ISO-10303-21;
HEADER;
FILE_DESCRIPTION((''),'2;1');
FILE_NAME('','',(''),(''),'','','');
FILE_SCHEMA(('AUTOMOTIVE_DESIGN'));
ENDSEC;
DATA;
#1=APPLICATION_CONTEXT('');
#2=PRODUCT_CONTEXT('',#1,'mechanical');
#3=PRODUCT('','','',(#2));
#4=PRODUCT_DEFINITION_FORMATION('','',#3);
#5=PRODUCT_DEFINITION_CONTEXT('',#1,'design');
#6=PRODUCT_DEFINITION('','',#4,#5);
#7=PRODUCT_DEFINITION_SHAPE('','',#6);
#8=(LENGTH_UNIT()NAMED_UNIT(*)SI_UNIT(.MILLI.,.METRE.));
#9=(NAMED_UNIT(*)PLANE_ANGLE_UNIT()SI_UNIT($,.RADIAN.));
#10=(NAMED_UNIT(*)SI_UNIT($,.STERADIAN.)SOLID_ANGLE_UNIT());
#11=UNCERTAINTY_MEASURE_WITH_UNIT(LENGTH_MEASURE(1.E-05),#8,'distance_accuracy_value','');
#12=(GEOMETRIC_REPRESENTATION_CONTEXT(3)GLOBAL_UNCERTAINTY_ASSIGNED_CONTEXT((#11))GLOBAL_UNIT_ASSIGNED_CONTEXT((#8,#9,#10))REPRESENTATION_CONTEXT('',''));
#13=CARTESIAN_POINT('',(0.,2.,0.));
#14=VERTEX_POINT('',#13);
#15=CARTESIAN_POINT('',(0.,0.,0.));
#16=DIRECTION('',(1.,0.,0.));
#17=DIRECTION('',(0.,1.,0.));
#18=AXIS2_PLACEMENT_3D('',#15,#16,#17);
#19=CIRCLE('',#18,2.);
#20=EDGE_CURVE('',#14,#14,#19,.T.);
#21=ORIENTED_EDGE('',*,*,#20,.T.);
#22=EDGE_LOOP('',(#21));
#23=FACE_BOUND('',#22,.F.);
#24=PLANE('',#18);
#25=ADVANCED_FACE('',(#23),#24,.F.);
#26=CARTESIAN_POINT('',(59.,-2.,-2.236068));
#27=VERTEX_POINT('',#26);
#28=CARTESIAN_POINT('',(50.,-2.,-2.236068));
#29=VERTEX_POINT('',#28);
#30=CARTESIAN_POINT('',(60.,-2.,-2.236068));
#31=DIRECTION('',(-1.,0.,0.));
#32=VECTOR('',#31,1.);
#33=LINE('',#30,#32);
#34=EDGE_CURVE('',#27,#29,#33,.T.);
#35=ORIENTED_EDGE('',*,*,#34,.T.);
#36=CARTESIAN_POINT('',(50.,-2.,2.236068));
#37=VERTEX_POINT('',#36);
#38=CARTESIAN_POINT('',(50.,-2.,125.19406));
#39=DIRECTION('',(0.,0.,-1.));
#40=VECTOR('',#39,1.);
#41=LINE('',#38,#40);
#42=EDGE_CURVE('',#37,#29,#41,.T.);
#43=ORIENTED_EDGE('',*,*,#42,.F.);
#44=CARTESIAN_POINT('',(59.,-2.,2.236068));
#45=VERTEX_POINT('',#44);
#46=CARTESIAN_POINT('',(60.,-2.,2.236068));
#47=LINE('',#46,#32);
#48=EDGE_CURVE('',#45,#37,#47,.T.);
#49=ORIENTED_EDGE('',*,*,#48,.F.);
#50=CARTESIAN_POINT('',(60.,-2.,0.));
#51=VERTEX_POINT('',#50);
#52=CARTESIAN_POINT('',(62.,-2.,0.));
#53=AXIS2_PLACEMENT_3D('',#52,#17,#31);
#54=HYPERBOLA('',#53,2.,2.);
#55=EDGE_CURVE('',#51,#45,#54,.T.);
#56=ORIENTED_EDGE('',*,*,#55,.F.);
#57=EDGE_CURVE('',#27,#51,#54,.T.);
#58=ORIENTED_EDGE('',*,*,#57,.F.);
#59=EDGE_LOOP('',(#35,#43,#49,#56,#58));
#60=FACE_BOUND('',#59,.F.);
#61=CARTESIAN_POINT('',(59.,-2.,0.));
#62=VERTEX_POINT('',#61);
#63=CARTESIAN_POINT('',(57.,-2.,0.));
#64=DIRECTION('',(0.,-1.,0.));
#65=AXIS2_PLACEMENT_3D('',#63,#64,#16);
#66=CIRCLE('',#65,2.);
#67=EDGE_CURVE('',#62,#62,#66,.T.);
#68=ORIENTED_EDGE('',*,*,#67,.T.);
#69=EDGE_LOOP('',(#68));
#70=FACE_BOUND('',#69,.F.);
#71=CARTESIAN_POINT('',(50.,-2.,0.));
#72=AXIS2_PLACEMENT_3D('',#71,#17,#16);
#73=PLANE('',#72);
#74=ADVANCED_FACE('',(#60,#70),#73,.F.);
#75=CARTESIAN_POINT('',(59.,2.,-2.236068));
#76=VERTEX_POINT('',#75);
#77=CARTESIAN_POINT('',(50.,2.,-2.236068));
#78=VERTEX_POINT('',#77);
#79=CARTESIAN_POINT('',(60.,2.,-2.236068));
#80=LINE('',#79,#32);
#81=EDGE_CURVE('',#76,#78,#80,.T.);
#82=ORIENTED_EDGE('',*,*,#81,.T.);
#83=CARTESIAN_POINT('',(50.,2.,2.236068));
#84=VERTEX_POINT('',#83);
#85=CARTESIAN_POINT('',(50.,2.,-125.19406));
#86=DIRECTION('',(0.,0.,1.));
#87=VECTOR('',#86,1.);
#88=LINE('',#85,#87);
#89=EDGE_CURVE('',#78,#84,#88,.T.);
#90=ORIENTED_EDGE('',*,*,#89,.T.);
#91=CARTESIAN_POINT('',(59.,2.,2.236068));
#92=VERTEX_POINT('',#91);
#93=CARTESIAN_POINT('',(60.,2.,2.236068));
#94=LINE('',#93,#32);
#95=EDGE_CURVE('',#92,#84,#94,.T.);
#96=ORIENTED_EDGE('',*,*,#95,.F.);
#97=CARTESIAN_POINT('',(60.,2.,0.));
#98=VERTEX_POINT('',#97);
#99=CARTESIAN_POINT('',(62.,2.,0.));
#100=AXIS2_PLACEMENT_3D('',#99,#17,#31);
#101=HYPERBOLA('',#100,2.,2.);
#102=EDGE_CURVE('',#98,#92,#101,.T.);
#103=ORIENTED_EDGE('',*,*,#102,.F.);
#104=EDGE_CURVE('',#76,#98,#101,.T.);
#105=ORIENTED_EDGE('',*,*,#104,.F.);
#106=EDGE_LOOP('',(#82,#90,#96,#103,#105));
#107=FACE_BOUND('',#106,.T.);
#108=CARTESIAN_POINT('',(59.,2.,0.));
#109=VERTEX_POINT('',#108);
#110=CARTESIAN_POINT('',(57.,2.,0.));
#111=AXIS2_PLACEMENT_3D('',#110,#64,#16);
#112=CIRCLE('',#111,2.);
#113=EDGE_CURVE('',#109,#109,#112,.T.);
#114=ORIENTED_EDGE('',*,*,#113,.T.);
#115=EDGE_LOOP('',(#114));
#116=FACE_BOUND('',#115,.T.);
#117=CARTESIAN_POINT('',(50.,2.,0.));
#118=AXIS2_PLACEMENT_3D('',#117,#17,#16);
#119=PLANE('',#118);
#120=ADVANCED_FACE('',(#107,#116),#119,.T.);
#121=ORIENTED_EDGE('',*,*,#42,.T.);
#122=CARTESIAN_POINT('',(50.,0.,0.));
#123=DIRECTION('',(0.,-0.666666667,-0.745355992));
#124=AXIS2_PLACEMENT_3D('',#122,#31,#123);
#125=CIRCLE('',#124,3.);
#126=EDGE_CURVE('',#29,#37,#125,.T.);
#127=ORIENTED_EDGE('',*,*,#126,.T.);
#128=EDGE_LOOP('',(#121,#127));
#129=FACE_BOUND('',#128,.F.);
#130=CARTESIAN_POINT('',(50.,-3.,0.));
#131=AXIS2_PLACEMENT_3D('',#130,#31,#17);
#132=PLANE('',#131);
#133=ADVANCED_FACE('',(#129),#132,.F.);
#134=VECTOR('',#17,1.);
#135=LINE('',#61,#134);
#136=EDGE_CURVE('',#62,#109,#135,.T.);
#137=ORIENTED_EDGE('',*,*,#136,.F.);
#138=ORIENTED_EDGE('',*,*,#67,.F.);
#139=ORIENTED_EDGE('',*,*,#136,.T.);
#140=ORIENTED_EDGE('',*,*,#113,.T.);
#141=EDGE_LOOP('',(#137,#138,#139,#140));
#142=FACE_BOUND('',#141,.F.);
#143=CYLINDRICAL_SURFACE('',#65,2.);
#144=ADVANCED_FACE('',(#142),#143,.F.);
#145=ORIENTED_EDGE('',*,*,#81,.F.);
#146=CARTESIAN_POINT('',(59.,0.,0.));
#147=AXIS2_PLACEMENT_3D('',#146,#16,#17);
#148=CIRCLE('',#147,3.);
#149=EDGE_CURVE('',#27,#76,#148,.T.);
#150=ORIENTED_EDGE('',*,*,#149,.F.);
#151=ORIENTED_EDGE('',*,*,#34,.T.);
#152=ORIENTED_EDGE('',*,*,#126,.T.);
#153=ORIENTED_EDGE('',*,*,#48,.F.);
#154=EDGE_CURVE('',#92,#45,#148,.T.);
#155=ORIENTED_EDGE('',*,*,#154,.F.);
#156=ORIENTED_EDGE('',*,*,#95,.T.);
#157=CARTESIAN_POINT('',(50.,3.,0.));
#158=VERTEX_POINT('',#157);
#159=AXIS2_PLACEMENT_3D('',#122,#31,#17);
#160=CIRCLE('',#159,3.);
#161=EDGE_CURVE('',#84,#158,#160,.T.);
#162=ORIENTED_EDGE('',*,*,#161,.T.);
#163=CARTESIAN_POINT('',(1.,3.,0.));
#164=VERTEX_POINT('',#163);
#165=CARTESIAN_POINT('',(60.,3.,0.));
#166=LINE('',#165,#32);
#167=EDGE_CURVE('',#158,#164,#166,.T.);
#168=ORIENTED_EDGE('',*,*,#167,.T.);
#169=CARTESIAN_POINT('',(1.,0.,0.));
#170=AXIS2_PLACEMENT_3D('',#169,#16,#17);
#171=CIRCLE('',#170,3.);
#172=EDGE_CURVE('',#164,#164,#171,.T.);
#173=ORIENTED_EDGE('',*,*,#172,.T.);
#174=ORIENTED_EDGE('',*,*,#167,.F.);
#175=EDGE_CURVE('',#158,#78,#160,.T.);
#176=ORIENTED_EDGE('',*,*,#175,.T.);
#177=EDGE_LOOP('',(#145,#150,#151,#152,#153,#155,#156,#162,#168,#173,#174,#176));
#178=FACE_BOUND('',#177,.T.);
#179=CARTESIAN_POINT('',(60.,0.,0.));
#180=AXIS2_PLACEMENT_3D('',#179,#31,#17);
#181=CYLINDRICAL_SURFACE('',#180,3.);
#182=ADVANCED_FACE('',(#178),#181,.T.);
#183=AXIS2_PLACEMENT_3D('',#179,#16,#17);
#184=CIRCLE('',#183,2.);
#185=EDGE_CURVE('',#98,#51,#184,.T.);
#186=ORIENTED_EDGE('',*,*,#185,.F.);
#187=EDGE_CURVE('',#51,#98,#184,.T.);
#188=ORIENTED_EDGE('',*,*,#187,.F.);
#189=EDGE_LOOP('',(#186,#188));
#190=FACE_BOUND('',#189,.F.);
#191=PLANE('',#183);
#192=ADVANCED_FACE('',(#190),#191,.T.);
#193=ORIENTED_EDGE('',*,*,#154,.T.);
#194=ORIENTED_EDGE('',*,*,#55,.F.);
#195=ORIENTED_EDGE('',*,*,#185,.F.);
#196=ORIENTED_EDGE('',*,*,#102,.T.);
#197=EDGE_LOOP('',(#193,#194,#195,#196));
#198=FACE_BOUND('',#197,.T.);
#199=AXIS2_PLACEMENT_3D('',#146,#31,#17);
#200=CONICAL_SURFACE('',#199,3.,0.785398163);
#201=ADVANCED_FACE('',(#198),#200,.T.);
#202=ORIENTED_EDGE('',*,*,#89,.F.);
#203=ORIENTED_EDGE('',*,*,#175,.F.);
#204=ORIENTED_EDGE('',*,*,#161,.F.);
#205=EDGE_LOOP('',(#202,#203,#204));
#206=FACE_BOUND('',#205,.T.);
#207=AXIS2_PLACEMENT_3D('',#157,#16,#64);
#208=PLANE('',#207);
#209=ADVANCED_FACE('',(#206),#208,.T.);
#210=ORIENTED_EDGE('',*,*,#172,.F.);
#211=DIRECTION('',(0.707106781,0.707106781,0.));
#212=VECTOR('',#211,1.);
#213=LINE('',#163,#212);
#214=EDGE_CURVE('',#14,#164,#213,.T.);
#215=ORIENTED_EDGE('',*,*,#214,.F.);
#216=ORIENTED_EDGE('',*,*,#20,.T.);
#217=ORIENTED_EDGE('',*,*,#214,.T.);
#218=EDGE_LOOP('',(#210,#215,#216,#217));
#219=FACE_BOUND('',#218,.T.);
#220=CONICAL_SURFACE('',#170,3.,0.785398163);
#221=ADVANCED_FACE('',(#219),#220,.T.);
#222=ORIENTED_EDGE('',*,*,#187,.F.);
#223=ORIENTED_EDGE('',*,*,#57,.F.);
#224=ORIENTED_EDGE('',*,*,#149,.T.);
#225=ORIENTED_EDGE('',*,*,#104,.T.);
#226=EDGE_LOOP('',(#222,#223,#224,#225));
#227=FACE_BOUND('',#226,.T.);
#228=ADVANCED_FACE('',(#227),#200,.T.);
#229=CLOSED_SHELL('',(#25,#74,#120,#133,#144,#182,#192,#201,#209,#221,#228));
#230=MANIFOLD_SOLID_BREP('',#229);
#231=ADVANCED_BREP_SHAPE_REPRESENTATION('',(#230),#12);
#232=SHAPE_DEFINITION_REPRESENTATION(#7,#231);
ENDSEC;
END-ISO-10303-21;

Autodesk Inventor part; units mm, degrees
ref_plane "YZ Plane" through (0, 0, 0) normal (1, 0, 0) x (0, 1, 0)
ref_plane "XZ Plane" through (0, 0, 0) normal (0, 1, 0) x (-1, 0, 0)
ref_plane "XY Plane" through (0, 0, 0) normal (0, 0, 1) x (1, 0, 0)
sketch "Sketch1" plane through (0, 0, 0) normal (0, 0, 1) x (1, 0, 0)
  line L0 (0, 0) -> (60, 0)
  line L1 (60, 0) -> (60, 3)
  line L2 (60, 3) -> (0, 3)
  line L3 (0, 3) -> (0, 0)
  dimension "d0" = 60
  dimension "d1" = 6
revolve "Revolution1" add sketch "Sketch1" angle 360 about axis through (0, 0, 0) along (1, 0, 0)
thread "Thread1" size "M6x1" class "6g" standard "ANSI Metric M Profile" length 15
chamfer "Chamfer1" distance 1 angle 45 2 edges at (0, -3, 0) (60, -3, 0)
sketch "Sketch2" plane through (0, 0, 0) normal (0, 0, 1) x (1, 0, 0)
  line L0 (1, 3) -> (59, 3) projected
  line L1 (60, 3) -> (50, 3)
  line L2 (50, 3) -> (50, 2)
  line L3 (50, 2) -> (60, 2)
  line L4 (60, 2) -> (60, 3)
  line L5 (60, -3) -> (60, 3) projected
  line L6 (60, -3) -> (50, -3)
  line L7 (50, -3) -> (50, -2)
  line L8 (50, -2) -> (60, -2)
  line L9 (60, -2) -> (60, -3)
  point P0 (0, 0)
  point P1 (50, 3)
  dimension "d8" = 4
  dimension "d15" = 10
extrude "Extrusion1" cut sketch "Sketch2" along normal through all both and the other way through all
sketch "Sketch3" plane through (50, -2, -2.2361) normal (0, -1, 0) x (1, 0, 0)
  circle A0 centre (7, 2.2361) radius 2
  line L0 (10, 2.2361) -> (10, 0.2361) projected
  point P0 (-50, 2.2361)
  dimension "d11" = 4
  dimension "d14" = 3
extrude "Extrusion2" cut sketch "Sketch3" against normal through all
properties part number "M6x1_THREADED_ROD_CPY_CPY"
